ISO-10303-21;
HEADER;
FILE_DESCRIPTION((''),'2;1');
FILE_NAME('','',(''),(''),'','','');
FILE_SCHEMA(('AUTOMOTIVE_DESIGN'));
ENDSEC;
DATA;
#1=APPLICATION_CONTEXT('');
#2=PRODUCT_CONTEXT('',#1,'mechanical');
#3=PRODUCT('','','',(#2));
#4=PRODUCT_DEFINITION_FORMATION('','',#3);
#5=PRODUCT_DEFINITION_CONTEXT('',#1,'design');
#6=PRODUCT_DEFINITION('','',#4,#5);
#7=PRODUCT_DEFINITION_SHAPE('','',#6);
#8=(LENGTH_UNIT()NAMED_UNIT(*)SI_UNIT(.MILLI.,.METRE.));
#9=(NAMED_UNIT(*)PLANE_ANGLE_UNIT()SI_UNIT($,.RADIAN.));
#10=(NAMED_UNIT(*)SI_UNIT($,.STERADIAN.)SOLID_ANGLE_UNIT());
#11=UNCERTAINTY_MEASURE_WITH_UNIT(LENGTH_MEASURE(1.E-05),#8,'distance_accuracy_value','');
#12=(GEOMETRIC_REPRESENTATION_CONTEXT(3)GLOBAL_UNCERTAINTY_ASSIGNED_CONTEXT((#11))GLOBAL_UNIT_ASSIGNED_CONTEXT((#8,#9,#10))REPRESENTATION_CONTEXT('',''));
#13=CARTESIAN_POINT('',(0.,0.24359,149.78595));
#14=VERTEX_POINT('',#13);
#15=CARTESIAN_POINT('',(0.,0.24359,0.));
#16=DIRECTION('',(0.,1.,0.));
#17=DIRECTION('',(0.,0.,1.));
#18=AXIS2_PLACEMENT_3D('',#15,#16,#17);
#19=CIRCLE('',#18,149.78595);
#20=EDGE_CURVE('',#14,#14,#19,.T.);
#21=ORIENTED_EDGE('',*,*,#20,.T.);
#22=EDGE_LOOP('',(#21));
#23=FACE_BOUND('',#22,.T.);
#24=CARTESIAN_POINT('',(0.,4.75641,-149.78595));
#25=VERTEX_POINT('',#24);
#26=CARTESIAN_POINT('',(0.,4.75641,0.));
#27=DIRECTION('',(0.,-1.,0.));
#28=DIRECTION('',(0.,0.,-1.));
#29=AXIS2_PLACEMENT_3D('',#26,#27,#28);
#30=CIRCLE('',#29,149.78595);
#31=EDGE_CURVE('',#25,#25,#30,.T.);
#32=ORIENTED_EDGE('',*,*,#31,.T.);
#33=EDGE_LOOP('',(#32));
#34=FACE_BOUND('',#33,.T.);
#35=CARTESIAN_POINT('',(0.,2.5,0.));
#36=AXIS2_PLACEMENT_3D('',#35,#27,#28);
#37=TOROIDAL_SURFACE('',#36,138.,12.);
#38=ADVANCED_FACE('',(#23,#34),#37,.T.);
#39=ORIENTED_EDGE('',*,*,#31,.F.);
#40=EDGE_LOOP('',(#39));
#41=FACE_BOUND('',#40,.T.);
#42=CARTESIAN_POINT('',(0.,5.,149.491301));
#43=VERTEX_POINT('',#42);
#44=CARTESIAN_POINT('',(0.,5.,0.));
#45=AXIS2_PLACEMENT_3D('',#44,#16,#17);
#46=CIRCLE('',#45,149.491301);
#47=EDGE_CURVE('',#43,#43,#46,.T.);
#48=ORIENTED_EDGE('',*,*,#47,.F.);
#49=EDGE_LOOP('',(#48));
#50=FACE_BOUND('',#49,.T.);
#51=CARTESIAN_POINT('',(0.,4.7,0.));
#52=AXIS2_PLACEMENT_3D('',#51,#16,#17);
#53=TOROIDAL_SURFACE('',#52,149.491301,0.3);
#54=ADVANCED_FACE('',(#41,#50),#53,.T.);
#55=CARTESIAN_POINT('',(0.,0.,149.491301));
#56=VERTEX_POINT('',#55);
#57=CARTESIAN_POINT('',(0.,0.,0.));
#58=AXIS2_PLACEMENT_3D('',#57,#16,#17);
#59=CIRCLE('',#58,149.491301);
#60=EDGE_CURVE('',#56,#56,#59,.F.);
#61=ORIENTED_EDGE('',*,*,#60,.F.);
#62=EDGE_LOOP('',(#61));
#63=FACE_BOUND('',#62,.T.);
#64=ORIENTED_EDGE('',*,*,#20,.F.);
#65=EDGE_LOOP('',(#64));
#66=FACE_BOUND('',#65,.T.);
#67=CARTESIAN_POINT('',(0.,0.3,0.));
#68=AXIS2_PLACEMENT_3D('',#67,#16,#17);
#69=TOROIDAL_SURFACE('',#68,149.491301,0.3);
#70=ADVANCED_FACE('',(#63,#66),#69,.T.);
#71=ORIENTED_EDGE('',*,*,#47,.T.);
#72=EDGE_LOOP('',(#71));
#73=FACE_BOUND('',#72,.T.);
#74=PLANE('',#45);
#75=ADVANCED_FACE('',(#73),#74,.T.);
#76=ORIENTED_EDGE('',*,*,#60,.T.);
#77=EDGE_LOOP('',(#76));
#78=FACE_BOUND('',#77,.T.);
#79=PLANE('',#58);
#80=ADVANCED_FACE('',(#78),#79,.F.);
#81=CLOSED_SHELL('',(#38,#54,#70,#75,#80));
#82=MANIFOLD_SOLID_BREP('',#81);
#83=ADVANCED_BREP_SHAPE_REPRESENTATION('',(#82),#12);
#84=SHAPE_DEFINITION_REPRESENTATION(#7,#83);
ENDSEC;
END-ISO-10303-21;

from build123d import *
from build123d.topology import SkipClean

# Parameters (mm, degrees)
SKETCH1_R           = 150
BOSS_EXTRUDE1_DEPTH = 5
FILLET1_R           = 0.3


with BuildPart() as part:
    # Sketch1 → Boss-Extrude1 (new body)
    with BuildSketch(Plane(origin=(0, 0, 0), x_dir=(1, 0, 0), z_dir=(0, 1, 0))):
        Circle(SKETCH1_R)
    extrude(amount=BOSS_EXTRUDE1_DEPTH)

    # Sketch2 → Cut-Revolve2 (revolve, cut)
    with SkipClean():  # the faces are left unmerged after this step: merging them gives an invalid solid
        with BuildSketch(Plane.XY):
            with BuildLine():
                Line((-150, 5), (-152.218260016, 5))
                Line((-152.218260016, 5), (-152.218260016, 0))
                Line((-152.218260016, 0), (-150, 0))
                Line((-150, 0), (-149.736694594, 0))
                ThreePointArc((-149.736694594, 0), (-150, 2.5), (-149.736694594, 5))
                Line((-149.736694594, 5), (-150, 5))
            make_face()
        revolve(axis=Axis((0, 0, 0), (0, 1, 0)), mode=Mode.SUBTRACT)
    add(part.part.scale(1), mode=Mode.REPLACE)  # the faces are merged on a copy

    # Fillet1
    fillet1_edges = [part.edges().sort_by_distance(p)[0] for p in [
        (149.736694594, 0, 0),
        (149.736694594, 5, 0),
    ]]
    fillet(fillet1_edges, radius=FILLET1_R)


solid = part.part
